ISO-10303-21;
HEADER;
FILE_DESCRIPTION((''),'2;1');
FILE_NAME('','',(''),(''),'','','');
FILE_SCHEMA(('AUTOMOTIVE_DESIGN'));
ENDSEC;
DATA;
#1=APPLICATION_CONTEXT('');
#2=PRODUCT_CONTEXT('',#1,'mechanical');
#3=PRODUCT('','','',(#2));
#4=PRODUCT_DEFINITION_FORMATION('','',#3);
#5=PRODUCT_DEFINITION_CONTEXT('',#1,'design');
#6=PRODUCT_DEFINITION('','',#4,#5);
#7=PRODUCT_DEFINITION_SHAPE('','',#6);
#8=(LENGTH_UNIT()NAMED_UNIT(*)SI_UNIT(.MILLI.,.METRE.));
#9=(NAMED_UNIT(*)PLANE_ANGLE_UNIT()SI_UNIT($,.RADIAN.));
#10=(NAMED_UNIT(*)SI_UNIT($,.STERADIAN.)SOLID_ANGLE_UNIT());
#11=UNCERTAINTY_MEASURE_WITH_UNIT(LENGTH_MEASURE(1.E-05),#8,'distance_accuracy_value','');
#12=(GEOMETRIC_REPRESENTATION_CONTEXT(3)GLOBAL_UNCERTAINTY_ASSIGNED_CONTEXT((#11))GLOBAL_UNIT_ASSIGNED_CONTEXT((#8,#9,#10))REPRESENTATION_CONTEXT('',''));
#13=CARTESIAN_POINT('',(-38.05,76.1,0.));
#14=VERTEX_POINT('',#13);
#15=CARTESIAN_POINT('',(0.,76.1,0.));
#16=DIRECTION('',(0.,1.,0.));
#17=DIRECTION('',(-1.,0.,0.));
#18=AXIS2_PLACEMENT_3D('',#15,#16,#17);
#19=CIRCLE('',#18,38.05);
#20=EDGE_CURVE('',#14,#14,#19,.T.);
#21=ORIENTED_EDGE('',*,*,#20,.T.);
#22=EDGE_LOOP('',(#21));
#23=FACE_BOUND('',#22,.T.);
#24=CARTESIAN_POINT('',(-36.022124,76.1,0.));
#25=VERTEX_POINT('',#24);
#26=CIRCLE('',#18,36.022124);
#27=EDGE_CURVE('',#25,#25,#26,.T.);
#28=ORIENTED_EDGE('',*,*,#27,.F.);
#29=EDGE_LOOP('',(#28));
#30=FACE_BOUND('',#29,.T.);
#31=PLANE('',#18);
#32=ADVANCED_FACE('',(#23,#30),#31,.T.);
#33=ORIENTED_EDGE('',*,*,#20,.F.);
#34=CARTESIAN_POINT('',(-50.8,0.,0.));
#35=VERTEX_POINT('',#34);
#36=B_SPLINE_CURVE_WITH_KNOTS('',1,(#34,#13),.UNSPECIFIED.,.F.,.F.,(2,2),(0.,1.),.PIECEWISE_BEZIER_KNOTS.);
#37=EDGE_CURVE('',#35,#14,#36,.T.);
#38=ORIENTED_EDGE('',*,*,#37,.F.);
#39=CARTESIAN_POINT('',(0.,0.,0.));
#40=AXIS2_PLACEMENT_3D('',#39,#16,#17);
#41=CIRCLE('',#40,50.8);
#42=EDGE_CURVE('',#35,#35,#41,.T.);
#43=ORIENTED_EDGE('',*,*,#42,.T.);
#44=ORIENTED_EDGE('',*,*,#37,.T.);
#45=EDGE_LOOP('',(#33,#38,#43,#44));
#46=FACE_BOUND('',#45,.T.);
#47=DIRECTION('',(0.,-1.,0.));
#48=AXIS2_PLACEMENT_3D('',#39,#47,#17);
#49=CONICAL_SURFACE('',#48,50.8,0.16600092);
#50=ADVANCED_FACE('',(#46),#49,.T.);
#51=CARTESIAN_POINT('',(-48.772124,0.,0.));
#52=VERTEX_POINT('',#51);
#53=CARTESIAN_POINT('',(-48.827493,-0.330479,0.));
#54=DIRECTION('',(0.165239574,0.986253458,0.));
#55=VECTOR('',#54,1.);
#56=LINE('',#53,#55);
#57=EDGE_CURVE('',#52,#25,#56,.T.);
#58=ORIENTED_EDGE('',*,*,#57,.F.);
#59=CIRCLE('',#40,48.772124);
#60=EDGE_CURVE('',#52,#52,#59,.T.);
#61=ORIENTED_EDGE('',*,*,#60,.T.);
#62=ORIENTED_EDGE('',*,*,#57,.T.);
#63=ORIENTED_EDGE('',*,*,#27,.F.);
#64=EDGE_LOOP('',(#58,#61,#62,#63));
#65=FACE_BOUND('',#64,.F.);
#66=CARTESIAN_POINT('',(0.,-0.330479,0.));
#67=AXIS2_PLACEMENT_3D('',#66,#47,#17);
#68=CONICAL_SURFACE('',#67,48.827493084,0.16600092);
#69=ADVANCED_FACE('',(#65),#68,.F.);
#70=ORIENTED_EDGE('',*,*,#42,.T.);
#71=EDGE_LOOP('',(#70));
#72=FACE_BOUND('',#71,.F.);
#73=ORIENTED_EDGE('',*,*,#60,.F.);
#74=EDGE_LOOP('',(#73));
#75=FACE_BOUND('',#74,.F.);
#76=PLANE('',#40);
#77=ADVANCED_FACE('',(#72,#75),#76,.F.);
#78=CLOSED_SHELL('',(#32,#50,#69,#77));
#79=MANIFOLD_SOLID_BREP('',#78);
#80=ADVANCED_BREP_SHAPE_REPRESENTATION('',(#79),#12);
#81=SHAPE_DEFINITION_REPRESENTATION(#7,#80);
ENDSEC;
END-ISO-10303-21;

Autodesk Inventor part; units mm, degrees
ref_plane "YZ Plane" through (0, 0, 0) normal (1, 0, 0) x (0, 1, 0)
ref_plane "XY Plane" through (0, 0, 0) normal (0, 0, 1) x (1, 0, 0)
sketch "Szkic6" plane through (0, 0, 0) normal (0, 1, 0) x (-1, 0, 0)
  circle A0 centre (0, 0) radius 50.8
  dimension "d33" = 101.6
ref_plane "Płaszczyzna konstrukcyjna1" through (0, 76.1, 0) normal (0, 1, 0) x (-1, 0, 0)
sketch "Szkic7" plane through (0, 76.1, 0) normal (0, 1, 0) x (-1, 0, 0)
  circle A0 centre (0, 0) radius 38.05
  dimension "d35" = 76.1
loft "Wyciągnięcie złożone1" add profiles "Szkic6", "Szkic7"
shell "Skorupa1" thickness 2 removed faces 2 at (-5.8996, 76.1, 7.9079) at (7.3018, 0, 11.5135)
equation "\"d33\" = OD1"
equation "\"d35\" = OD2"
equation "\"d52\" = THK"
equation "\"SzerokośćGięciaPodcięcia\" = Grubość"
equation "\"RozmiarPodcięciaNarożnika\" = 4 * Grubość"
equation "\"PromieńPrzejścia\" = PromieńGięcia"
equation "\"Rozmiar_promienia_Jacobiego\" = PromieńGięcia"
equation "\"Wielk_odstępu\" = Grubość"
equation "\"d2\" = PromieńGięcia"
equation "\"d23\" = PromieńGięcia"
equation "\"OD1\" = 101.6"
equation "\"OD2\" = 76.1"
equation "\"L\" = 76.1"
equation "\"THK\" = 2"
equation "\"d34\" = L"
equation "\"Grubość\" = 1.5"
equation "\"PromieńGięcia\" = 3"
properties part number "Redukcja symetryczna Ø101,6x76,1x2 L=76,1" material "304"
